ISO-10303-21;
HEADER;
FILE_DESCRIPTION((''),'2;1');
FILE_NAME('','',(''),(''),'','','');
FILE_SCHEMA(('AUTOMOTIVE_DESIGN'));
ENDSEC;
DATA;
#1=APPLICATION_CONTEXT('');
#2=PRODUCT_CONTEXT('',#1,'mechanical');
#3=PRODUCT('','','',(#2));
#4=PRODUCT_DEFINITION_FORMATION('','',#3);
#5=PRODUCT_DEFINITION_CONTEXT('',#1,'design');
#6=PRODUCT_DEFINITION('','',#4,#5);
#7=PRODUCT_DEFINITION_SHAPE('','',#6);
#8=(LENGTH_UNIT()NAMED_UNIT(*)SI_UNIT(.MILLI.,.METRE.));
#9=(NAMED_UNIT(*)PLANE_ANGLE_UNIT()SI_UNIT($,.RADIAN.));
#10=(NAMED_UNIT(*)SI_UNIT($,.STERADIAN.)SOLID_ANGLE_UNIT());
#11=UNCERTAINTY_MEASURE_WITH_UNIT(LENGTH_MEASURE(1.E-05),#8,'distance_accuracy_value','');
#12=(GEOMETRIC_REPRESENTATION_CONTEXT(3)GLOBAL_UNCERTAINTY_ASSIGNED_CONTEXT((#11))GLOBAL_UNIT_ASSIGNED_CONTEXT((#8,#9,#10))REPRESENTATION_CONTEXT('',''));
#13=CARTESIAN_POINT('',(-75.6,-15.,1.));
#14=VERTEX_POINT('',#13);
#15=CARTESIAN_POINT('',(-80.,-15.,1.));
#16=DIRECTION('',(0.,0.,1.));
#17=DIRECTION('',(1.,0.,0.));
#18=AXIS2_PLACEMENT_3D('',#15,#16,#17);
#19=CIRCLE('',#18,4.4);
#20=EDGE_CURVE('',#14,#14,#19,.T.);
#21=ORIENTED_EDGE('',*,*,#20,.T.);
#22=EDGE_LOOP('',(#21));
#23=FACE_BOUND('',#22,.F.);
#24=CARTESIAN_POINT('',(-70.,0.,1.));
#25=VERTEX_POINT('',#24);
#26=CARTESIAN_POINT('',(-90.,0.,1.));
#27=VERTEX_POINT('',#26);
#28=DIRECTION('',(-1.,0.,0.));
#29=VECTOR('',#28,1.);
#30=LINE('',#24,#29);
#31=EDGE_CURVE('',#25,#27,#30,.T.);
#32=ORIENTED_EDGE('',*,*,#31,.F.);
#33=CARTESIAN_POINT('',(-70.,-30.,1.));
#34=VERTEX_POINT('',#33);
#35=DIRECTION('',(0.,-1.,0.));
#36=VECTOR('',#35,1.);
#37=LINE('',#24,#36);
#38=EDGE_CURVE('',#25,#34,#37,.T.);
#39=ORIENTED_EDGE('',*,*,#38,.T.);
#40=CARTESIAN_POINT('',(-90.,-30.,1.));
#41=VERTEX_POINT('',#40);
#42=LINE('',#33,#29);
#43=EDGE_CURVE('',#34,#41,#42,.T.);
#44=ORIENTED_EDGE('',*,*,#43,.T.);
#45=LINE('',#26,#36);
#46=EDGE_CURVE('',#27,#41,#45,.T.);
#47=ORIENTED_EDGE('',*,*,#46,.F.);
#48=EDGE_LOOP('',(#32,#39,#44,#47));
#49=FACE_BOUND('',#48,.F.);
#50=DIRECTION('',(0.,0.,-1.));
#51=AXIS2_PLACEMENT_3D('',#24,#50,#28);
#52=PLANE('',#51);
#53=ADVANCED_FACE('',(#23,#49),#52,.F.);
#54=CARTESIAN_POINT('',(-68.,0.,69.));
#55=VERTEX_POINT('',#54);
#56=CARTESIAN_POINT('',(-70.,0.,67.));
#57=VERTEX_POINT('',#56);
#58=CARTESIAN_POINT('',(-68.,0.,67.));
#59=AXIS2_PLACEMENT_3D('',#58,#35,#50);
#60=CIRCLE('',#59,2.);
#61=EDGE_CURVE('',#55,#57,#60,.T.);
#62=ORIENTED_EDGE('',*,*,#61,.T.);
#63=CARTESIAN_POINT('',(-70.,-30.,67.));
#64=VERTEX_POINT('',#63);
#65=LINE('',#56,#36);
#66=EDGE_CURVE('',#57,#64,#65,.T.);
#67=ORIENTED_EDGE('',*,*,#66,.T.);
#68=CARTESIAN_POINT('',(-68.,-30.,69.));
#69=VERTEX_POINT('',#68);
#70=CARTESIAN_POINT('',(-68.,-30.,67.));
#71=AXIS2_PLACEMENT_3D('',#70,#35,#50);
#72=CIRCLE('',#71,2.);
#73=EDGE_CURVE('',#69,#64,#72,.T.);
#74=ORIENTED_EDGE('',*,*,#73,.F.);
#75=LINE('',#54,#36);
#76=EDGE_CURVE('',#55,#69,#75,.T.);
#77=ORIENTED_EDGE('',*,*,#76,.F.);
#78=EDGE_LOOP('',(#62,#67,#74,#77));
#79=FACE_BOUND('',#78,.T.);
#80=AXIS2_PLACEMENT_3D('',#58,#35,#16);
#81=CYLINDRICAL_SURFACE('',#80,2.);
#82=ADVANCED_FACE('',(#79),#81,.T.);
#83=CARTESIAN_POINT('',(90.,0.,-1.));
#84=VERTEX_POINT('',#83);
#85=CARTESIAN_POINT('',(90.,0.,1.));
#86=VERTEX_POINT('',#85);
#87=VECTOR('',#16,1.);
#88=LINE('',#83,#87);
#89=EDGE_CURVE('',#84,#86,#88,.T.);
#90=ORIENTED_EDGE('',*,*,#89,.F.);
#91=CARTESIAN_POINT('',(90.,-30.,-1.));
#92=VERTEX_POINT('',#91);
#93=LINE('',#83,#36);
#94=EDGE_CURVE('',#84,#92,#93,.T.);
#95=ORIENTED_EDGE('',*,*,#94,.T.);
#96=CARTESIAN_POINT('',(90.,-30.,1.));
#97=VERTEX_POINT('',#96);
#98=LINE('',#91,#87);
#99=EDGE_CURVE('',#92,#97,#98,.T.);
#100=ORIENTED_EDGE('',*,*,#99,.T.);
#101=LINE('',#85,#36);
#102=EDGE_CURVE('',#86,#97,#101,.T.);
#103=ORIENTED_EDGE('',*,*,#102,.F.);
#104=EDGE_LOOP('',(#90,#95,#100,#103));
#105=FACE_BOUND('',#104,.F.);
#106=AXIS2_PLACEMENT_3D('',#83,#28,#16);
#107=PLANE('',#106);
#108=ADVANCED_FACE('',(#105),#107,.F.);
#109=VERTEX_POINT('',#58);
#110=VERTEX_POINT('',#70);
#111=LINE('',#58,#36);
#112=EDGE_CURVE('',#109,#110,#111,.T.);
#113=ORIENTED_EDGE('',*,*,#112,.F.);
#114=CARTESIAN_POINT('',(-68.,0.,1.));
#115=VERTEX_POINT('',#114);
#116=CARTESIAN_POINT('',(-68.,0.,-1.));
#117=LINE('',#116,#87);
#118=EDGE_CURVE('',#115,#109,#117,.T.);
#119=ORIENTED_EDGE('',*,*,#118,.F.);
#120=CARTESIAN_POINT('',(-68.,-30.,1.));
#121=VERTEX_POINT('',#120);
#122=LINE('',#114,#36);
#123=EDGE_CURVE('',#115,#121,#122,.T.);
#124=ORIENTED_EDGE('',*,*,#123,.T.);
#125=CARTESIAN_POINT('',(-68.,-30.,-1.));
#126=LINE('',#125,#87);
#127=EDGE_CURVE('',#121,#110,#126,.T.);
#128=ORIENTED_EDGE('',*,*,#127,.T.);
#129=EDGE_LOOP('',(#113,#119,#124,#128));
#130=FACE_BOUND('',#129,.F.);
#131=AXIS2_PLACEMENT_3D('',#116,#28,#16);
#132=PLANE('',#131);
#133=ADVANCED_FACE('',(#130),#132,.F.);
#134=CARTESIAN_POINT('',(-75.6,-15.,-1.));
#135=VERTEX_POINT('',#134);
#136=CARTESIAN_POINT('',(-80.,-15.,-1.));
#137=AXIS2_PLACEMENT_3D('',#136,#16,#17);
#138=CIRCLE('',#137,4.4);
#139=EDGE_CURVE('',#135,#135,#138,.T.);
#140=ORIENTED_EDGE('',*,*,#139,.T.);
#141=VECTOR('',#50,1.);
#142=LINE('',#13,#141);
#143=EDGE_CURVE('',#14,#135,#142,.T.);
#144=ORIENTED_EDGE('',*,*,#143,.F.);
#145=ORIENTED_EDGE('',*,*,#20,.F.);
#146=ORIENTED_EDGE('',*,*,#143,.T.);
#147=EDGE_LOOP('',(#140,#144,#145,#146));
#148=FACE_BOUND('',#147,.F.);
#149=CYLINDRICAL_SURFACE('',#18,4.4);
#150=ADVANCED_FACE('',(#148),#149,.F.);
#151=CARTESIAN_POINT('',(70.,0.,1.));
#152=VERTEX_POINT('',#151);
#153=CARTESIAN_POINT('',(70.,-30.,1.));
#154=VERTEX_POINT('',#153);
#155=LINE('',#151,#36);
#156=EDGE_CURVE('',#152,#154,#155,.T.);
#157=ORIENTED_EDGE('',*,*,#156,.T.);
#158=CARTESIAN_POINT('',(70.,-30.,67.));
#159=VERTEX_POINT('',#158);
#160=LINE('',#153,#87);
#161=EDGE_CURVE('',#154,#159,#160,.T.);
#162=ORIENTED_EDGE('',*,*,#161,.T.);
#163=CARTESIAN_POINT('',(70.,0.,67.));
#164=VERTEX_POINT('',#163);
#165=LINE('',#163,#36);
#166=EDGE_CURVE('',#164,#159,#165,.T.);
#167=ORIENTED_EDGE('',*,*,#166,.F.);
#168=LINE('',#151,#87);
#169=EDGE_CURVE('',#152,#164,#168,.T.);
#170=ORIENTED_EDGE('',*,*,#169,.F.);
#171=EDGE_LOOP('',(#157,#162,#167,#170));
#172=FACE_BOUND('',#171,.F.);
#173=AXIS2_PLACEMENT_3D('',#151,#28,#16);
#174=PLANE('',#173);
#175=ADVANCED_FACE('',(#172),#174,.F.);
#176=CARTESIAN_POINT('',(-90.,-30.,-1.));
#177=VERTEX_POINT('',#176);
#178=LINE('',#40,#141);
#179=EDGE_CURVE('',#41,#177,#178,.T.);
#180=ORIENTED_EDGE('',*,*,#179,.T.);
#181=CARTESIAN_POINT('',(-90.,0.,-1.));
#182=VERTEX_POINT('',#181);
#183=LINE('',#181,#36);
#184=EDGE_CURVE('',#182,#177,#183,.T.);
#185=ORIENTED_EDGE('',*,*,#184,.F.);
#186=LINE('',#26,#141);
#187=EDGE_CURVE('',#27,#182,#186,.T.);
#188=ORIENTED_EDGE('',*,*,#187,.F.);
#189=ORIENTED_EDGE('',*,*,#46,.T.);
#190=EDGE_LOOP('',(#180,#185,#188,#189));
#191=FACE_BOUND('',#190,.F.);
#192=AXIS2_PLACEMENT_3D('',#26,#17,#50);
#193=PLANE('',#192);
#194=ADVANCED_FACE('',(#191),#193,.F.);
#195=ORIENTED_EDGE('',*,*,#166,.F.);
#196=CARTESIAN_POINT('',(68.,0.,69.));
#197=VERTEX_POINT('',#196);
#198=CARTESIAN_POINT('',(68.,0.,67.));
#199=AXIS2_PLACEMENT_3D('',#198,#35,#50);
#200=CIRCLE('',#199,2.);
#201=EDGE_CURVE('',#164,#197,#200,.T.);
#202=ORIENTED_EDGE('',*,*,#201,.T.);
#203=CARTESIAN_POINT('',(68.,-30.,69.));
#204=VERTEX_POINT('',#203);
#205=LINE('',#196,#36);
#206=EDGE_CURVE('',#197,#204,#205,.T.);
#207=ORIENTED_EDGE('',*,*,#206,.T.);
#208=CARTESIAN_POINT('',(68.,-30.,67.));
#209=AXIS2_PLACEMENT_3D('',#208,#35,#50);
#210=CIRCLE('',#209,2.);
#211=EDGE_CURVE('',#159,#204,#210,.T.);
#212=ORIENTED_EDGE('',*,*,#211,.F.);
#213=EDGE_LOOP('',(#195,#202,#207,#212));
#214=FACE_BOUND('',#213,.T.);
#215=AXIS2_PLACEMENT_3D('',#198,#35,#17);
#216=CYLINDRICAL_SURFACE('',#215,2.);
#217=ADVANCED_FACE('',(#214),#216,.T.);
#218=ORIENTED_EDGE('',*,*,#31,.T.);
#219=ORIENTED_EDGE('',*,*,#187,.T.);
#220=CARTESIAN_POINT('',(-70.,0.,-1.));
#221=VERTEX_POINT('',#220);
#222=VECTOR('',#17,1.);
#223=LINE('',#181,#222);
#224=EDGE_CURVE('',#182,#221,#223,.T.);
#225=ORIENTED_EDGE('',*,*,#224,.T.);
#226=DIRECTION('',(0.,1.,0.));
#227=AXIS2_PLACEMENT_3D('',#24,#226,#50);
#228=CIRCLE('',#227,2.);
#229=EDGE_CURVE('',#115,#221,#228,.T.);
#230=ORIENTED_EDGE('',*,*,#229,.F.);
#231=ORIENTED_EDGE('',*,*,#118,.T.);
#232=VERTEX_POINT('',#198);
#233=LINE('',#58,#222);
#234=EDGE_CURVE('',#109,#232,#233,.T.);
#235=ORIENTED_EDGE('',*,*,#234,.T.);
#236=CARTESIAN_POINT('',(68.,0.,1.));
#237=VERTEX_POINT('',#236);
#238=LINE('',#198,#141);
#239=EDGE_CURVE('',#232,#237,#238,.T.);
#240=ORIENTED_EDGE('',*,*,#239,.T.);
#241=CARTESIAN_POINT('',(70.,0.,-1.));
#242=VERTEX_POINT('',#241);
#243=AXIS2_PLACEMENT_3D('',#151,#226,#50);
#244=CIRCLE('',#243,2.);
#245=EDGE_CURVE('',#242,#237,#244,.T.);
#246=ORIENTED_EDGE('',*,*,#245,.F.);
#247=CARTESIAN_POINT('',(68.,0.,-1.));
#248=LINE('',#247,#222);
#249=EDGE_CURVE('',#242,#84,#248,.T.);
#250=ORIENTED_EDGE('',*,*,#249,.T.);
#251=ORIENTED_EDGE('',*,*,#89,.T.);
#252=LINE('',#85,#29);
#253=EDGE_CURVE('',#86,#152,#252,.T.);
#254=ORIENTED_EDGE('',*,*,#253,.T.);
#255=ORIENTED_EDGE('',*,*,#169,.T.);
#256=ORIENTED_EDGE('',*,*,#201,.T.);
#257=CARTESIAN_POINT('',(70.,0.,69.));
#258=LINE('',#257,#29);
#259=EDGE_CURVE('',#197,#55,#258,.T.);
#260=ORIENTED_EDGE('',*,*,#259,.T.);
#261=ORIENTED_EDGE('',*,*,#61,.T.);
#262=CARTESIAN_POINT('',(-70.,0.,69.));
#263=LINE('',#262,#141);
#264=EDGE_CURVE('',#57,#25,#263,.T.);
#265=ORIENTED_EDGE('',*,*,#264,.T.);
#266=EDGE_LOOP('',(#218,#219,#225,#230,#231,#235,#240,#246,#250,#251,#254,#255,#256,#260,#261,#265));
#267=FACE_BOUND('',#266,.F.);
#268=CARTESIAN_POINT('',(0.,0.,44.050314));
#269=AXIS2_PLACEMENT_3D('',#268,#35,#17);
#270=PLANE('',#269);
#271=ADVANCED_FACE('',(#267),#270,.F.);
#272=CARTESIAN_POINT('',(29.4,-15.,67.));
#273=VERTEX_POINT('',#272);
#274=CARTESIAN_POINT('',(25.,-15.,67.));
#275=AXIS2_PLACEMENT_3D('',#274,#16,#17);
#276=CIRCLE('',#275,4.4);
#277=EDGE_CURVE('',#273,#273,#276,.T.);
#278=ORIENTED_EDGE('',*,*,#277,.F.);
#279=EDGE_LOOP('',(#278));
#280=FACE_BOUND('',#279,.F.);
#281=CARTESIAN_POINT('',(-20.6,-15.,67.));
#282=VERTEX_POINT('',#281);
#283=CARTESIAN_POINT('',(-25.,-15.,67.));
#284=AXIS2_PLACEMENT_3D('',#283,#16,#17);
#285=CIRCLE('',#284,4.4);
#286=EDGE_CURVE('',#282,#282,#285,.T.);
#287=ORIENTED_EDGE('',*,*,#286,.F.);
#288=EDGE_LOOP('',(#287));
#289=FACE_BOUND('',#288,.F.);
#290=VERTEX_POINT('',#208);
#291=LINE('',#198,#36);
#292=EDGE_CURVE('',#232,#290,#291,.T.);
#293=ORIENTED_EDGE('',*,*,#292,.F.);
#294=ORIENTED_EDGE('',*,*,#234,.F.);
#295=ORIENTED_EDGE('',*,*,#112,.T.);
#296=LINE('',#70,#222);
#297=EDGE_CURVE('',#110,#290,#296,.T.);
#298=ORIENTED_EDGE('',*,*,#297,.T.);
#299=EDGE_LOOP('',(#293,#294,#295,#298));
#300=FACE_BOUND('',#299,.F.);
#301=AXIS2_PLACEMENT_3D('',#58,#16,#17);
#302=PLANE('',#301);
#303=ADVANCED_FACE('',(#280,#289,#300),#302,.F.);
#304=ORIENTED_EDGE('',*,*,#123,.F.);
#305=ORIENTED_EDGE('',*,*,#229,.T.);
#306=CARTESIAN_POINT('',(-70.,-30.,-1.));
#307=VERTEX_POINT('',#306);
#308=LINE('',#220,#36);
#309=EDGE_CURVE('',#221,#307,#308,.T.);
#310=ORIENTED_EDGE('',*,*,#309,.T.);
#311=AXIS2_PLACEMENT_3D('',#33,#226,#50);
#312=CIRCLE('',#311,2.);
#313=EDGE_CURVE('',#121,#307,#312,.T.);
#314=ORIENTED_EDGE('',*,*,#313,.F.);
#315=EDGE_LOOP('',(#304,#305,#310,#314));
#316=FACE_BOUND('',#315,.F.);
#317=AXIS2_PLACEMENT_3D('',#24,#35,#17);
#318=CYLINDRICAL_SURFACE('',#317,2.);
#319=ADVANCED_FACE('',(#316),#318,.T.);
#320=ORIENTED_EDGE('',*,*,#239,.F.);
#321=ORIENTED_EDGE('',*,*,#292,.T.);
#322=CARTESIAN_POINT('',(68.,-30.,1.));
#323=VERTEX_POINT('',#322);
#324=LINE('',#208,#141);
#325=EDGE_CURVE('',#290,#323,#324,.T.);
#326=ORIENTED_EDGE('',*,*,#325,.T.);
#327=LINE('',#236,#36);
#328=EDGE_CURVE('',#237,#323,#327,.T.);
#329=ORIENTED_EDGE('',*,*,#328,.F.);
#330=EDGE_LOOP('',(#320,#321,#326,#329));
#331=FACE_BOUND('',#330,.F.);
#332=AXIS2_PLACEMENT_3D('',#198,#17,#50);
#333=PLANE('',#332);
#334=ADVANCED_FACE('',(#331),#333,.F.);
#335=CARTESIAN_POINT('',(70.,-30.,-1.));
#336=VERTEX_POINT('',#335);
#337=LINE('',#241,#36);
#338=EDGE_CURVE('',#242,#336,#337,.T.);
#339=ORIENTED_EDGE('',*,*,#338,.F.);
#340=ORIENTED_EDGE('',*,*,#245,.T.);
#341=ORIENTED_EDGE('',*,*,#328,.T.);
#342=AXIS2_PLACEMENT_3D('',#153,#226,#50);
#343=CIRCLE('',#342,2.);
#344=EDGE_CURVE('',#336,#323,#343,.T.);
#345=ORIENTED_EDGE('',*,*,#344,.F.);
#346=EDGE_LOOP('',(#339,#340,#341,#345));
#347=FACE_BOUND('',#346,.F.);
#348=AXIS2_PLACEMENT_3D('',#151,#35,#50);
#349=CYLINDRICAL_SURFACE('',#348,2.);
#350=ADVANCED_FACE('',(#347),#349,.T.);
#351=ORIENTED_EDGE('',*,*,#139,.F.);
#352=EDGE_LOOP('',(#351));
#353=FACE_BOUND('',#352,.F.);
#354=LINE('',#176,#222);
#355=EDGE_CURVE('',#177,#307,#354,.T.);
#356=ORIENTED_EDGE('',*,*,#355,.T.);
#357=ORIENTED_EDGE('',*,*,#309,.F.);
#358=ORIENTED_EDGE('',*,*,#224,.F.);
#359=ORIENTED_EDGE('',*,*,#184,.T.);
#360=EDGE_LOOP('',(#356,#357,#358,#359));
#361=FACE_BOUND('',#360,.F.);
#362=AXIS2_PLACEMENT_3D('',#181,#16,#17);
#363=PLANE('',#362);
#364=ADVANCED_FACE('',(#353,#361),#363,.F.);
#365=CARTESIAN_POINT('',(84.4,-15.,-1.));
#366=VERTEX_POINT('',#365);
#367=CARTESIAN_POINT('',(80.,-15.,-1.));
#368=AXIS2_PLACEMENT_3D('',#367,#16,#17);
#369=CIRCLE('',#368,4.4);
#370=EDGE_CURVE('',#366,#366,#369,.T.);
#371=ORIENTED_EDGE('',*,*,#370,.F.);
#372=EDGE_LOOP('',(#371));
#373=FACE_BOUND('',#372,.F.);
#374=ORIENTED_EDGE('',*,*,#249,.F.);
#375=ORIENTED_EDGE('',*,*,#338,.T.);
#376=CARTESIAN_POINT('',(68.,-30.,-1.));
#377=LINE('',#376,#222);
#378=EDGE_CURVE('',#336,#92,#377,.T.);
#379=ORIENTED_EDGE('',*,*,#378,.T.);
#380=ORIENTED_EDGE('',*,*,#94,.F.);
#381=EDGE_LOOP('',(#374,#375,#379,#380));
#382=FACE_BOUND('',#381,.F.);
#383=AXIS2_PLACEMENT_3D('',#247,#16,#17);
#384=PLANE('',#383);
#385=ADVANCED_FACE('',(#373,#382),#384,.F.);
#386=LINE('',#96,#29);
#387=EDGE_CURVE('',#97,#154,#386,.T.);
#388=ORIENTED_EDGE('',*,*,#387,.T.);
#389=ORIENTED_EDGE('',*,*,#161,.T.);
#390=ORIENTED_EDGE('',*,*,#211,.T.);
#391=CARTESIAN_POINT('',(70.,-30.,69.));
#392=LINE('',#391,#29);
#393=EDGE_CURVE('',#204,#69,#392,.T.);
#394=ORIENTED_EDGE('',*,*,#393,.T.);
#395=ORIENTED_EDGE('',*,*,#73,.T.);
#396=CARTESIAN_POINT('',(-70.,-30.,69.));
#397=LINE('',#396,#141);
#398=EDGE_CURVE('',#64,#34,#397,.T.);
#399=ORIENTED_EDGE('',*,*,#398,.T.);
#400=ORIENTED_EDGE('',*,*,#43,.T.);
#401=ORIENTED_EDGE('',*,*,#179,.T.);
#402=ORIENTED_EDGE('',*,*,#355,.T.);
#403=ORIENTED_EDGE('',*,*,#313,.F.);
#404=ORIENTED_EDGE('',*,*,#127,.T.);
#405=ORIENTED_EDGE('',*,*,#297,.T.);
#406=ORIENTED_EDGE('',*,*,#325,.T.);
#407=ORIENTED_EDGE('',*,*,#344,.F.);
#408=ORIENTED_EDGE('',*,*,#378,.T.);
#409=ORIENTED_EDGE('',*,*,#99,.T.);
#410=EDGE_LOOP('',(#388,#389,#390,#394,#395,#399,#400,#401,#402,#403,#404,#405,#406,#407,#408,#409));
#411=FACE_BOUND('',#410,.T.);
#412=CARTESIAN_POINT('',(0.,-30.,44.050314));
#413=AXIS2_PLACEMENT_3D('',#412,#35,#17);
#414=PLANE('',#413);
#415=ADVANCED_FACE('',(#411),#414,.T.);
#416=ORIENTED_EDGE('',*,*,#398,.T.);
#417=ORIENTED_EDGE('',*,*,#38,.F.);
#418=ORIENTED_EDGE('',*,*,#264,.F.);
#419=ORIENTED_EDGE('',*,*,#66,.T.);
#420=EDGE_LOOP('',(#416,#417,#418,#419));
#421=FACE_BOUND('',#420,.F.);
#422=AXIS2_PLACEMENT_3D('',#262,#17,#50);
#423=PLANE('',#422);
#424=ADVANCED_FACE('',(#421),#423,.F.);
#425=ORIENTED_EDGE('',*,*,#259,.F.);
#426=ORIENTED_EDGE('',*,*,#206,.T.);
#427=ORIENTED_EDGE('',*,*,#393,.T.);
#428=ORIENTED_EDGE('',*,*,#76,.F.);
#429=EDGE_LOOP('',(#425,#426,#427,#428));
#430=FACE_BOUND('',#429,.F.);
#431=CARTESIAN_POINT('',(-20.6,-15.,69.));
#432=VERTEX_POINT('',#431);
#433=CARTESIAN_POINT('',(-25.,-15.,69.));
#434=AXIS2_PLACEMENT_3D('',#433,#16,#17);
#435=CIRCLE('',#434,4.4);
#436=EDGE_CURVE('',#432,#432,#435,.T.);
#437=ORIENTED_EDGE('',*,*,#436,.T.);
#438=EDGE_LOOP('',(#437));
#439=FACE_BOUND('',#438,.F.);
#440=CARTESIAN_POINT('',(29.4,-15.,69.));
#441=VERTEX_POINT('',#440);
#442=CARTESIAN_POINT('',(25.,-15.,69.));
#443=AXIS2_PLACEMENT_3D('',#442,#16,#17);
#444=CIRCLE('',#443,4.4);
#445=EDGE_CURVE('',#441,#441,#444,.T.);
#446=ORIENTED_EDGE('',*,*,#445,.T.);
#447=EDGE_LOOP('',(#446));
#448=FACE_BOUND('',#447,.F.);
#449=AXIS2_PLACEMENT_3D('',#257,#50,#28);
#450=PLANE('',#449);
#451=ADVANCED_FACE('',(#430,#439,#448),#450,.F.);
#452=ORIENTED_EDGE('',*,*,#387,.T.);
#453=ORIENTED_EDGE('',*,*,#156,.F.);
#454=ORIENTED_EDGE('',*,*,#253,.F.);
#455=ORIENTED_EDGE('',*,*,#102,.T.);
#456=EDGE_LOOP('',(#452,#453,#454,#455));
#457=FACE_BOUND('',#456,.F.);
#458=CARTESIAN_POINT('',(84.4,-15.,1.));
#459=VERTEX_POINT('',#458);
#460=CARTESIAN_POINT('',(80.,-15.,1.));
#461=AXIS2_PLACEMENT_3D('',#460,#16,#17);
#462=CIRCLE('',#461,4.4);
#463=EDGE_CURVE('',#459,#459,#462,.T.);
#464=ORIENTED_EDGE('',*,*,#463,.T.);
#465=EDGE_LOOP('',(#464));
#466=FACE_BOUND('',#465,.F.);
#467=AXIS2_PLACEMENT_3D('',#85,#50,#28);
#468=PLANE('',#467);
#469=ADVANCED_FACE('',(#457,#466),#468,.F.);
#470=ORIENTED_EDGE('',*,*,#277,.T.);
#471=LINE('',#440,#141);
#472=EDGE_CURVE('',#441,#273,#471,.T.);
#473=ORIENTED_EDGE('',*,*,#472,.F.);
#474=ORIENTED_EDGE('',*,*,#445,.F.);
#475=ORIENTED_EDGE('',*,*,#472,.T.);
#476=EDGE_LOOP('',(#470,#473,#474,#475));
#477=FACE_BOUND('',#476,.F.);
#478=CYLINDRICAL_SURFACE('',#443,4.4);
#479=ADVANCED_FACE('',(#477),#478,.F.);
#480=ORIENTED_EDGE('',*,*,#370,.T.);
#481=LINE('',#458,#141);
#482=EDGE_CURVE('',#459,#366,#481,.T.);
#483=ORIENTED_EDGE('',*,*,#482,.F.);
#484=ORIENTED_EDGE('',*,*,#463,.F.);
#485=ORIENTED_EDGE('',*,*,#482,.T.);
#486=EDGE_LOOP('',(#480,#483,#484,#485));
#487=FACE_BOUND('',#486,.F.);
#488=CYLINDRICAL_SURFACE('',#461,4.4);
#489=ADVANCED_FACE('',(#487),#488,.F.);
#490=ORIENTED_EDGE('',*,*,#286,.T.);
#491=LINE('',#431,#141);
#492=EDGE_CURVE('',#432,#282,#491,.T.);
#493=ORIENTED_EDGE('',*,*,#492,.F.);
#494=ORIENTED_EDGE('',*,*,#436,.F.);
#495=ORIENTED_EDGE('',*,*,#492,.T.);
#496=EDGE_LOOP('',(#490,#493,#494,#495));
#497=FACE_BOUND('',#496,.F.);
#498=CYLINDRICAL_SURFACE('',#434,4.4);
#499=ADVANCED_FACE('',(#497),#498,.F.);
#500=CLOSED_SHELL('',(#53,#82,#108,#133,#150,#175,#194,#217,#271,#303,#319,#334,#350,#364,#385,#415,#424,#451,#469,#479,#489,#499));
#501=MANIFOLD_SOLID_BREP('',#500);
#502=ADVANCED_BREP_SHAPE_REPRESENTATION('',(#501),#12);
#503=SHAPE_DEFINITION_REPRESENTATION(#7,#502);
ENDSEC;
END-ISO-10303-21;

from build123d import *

# Parameters (mm, degrees)
F1_DEPTH = 30
F2_R     = 4.4
F3_R     = 4.4
F4_DEPTH = 25
F5_R     = 2
F6_R     = 2


# Not quite as in the source:
# - a feature names something its author has since deleted; it is built from what else it names


with BuildPart() as f1:
    # F0 (on Front) → F1 (new body)
    with BuildSketch(Plane.XZ):
        Polygon((90, -1), (90, 1), (70, 1), (70, 69), (-70, 69), (-70, 1), (-90, 1), (-90, -1), (-68, -1), (-68, 67), (68, 67), (68, -1), align=None)
    extrude(amount=F1_DEPTH)

    # F2 (on face) + F3 (on face) → F4 (cut)
    with BuildSketch(Plane.XY.offset(1)):
        with Locations((-80, -15)):
            Circle(F2_R)
        with Locations((80, -15)):
            Circle(F2_R)
    with BuildSketch(Plane.XY.offset(69)):
        with Locations((-25, -15)):
            Circle(F3_R)
        with Locations((25, -15)):
            Circle(F3_R)
    extrude(amount=-F4_DEPTH, mode=Mode.SUBTRACT)

    # F5
    f5_edges = [f1.edges().sort_by_distance(p)[0] for p in [
        (-70, -15, 69),
        (70, -15, 69),
    ]]
    fillet(f5_edges, radius=F5_R)

    # F6
    f6_edges = [f1.edges().sort_by_distance(p)[0] for p in [
        (68, -15, -1),
        (-68, -15, -1),
    ]]
    fillet(f6_edges, radius=F6_R)


solid = f1.part
